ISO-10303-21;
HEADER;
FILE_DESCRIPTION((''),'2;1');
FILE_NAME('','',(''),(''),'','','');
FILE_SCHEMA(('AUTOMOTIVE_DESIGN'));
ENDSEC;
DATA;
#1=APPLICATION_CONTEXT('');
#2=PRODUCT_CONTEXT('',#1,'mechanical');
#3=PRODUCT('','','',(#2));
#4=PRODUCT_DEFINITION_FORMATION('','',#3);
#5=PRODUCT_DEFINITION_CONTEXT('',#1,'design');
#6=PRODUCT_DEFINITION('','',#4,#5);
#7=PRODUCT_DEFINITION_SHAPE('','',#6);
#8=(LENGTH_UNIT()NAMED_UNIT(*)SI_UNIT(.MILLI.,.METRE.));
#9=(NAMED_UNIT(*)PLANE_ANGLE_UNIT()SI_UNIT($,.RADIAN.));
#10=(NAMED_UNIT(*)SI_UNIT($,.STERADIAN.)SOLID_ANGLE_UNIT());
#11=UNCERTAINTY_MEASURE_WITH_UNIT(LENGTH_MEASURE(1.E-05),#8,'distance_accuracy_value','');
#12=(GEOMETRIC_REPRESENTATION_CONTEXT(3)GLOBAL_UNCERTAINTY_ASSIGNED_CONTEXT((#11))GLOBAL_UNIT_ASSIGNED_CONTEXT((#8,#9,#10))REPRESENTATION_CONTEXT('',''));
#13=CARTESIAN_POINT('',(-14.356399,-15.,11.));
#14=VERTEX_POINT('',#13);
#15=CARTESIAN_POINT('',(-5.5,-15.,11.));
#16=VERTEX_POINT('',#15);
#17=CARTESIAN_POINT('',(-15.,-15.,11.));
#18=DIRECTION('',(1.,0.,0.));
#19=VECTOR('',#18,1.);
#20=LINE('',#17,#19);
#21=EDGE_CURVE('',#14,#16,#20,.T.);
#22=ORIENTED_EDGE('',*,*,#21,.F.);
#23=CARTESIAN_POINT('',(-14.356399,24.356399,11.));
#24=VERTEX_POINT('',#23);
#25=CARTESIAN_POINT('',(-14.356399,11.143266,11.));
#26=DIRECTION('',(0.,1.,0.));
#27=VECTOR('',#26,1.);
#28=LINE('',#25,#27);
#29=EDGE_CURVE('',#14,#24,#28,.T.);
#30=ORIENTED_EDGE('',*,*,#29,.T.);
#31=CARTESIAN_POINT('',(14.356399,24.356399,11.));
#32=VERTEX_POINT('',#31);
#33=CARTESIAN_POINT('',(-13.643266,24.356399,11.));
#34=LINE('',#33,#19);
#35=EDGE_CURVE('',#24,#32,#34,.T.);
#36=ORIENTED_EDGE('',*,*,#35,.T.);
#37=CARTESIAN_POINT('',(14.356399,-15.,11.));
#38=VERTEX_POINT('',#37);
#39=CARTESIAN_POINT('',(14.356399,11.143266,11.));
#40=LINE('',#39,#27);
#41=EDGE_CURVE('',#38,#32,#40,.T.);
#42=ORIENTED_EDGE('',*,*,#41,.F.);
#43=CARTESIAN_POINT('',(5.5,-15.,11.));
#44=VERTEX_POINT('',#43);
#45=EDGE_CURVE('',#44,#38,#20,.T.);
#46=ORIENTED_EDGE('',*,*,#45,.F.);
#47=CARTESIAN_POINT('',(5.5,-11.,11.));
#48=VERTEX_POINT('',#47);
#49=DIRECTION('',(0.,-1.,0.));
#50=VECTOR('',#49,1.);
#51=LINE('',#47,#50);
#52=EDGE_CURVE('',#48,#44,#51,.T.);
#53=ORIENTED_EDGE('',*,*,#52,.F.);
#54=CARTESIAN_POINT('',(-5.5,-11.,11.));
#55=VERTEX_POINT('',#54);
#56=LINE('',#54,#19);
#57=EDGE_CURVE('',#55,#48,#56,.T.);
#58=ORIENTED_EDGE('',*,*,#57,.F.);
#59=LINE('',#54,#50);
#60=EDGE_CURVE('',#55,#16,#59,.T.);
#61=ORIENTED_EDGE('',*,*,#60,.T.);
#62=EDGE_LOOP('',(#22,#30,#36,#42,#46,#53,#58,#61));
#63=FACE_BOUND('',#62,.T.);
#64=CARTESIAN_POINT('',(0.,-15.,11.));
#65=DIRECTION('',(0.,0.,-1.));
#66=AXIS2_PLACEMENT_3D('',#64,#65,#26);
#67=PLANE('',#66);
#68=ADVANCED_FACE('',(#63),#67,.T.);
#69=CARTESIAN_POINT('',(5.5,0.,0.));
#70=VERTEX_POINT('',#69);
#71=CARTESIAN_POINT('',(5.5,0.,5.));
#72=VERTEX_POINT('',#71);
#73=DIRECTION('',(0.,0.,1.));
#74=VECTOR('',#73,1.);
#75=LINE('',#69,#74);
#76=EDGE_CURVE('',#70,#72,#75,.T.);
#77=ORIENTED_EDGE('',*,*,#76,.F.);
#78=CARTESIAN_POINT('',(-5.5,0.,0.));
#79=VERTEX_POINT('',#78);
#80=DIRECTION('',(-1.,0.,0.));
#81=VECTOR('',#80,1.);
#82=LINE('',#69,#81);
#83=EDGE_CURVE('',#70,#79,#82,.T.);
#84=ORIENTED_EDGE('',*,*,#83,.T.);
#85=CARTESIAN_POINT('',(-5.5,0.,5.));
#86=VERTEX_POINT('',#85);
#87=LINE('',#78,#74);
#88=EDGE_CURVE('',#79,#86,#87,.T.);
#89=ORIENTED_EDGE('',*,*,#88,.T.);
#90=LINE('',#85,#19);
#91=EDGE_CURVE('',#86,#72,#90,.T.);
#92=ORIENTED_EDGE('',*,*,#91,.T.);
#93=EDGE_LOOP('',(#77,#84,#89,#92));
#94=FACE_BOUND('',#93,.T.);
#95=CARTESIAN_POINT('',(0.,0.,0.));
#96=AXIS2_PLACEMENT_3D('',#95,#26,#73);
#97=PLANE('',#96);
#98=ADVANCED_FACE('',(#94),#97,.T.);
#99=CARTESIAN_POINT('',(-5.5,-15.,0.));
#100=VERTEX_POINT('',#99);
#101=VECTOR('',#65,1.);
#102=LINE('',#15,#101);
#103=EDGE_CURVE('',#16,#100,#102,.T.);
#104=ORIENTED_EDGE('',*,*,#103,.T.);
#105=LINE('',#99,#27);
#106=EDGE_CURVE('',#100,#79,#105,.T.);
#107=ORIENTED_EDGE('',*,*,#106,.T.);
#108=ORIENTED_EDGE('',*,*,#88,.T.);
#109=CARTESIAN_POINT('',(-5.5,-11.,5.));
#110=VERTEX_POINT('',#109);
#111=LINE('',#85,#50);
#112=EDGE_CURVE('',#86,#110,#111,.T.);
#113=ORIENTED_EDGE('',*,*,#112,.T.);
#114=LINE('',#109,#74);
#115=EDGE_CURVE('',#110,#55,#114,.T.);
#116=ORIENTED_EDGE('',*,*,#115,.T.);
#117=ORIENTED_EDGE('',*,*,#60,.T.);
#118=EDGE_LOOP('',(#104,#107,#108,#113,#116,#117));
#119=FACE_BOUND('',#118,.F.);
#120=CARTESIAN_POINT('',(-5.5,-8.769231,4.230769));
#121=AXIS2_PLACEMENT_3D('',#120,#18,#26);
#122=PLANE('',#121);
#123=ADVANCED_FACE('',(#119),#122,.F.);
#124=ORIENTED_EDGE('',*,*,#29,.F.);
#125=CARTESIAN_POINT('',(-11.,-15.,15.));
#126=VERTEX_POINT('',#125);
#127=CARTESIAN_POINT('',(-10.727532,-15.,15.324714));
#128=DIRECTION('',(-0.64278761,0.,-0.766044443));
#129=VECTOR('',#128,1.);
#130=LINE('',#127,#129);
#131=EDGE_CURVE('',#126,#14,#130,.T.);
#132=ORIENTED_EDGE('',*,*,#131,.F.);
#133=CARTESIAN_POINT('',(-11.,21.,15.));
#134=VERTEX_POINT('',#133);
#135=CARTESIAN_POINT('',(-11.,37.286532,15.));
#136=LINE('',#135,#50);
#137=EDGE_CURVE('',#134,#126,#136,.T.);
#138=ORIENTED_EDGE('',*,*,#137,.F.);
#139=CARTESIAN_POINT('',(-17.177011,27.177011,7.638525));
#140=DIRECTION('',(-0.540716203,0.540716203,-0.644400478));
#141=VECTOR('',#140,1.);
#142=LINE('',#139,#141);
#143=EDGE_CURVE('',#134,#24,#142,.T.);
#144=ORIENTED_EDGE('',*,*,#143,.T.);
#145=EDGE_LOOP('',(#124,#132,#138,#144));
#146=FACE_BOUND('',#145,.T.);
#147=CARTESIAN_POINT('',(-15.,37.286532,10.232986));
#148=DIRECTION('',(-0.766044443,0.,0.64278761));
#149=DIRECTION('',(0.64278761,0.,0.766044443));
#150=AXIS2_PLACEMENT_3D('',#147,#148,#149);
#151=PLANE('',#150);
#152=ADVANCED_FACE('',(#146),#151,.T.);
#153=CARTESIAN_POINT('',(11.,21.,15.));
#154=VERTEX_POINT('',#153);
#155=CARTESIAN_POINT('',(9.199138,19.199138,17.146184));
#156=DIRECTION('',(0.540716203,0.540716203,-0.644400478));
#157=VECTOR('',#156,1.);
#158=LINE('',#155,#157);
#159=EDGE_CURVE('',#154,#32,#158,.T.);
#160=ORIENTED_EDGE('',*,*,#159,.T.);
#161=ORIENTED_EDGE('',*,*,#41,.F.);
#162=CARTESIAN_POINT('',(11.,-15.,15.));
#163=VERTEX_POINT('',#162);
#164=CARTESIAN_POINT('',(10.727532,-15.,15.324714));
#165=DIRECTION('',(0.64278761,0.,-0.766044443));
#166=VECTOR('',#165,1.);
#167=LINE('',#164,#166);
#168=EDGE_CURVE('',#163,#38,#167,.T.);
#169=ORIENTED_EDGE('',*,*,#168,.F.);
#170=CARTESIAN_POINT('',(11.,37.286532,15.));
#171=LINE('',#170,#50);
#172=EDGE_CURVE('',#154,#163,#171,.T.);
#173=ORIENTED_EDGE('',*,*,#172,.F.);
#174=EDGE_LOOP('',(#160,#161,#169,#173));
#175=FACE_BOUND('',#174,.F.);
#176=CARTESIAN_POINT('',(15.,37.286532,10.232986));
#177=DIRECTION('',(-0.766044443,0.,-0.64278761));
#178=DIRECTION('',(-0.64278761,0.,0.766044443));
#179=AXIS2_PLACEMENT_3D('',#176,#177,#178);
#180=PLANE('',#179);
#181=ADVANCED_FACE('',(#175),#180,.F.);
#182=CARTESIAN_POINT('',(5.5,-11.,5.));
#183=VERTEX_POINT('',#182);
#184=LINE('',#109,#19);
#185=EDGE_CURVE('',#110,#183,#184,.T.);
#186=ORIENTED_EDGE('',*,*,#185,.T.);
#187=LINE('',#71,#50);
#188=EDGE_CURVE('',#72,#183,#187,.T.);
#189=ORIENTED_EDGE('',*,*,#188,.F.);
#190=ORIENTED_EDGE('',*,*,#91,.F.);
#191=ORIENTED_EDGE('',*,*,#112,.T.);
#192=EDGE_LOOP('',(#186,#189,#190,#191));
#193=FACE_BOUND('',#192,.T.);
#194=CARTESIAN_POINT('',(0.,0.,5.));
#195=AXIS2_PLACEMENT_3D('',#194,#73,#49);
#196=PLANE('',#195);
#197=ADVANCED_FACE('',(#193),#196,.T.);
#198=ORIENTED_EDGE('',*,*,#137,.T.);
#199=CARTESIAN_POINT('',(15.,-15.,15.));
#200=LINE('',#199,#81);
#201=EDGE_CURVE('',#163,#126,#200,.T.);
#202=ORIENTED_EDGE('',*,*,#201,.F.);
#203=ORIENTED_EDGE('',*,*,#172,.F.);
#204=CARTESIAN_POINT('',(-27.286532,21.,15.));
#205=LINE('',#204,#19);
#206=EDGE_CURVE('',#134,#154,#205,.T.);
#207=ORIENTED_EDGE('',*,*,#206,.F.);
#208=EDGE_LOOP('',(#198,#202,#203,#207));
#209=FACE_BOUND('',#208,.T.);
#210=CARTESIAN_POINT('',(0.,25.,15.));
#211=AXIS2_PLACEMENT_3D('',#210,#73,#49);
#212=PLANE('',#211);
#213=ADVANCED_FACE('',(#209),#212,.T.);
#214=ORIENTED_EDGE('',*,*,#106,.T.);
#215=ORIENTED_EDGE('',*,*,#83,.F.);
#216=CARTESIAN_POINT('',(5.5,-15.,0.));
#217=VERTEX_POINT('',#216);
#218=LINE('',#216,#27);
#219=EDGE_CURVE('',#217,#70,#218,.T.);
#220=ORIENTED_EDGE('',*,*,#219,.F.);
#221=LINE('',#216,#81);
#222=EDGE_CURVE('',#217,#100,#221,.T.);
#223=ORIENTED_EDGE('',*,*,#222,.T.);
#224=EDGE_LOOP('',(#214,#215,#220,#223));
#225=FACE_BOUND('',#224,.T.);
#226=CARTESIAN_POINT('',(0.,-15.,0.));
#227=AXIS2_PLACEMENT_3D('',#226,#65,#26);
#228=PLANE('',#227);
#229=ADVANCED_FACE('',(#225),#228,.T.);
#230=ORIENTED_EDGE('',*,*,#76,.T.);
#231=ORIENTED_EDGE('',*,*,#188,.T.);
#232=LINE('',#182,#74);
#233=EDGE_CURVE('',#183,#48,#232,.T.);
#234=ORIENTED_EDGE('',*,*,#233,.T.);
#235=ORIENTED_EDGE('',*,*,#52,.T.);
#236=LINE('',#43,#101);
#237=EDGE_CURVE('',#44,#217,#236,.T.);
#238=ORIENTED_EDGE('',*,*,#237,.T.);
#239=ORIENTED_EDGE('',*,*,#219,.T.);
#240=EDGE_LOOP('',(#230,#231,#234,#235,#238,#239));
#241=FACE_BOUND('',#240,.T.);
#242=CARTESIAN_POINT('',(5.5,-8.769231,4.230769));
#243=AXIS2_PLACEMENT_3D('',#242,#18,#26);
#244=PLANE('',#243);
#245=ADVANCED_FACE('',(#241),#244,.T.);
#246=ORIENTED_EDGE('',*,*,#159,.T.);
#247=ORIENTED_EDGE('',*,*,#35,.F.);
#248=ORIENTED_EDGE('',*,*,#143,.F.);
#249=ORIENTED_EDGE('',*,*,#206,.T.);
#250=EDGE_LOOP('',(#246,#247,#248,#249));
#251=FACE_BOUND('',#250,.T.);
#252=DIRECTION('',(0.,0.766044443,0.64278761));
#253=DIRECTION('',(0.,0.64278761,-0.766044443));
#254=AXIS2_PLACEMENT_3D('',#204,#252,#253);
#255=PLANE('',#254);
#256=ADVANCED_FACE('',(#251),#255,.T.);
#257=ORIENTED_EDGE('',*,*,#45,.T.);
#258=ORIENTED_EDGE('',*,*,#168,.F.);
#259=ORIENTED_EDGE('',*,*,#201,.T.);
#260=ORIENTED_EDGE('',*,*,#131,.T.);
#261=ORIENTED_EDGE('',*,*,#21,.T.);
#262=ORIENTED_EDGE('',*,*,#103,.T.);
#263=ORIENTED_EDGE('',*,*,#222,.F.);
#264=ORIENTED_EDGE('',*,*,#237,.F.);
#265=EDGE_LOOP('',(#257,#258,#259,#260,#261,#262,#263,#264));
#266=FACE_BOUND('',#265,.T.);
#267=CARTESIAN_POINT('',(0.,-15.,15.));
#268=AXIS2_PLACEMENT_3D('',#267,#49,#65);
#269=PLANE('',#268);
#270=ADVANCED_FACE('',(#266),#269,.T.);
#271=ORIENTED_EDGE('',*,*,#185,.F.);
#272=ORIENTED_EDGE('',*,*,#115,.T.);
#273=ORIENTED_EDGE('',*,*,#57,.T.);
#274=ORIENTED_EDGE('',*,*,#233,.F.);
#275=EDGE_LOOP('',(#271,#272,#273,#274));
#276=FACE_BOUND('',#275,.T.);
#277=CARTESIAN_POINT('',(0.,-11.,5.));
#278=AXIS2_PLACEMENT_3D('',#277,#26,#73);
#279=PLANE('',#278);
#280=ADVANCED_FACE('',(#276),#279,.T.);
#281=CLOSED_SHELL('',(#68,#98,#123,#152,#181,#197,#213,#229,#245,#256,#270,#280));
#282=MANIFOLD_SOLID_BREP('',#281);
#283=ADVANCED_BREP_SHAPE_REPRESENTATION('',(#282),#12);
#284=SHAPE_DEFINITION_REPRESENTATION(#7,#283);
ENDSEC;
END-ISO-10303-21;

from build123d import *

# Parameters (mm, degrees)
F1_DEPTH    = 5.5
F2_DEPTH    = 15
F3_T1_DEPTH = 64.5730638659
F3_T3_DEPTH = 54.5730638659


# Not quite as in the source:
# - a fillet or chamfer that OpenCascade refuses, or shapes differently, is made with other operations: its cross-section is extruded or revolved along the edge and cut away or added


with BuildPart() as f1:
    # F0 (on Right) → F1 (new body, symmetric)
    with BuildSketch(Plane.YZ):
        Polygon((-11, 0), (0, 0), (0, 5), (-11, 5), (-11, 11), (-15, 11), (-15, 0), align=None)
    extrude(amount=F1_DEPTH, both=True)

    # F0 (on Right) → F2 (join, symmetric)
    with BuildSketch(Plane.YZ):
        Polygon((-15, 15), (-15, 11), (-11, 11), (25, 11), (25, 15), align=None)
    extrude(amount=F2_DEPTH, both=True)

    # F3: chamfer of 4 x 4.7670143704 on 3 edges, made by hand

    # F3_s2 → F3_t1 (cut)
    with BuildSketch(Plane.XZ.offset(-37.2865319329)):
        Polygon((15, 10.2329856296), (11, 15), (15, 15), align=None)
        Polygon((-15, 10.2329856296), (-11, 15), (-15, 15), align=None)
    extrude(amount=F3_T1_DEPTH, mode=Mode.SUBTRACT)

    # F3_s4 → F3_t3 (cut)
    with BuildSketch(Plane.YZ.offset(-27.2865319329)):
        Polygon((21, 15), (25, 10.2329856296), (25, 15), align=None)
    extrude(amount=F3_T3_DEPTH, mode=Mode.SUBTRACT)


solid = f1.part
